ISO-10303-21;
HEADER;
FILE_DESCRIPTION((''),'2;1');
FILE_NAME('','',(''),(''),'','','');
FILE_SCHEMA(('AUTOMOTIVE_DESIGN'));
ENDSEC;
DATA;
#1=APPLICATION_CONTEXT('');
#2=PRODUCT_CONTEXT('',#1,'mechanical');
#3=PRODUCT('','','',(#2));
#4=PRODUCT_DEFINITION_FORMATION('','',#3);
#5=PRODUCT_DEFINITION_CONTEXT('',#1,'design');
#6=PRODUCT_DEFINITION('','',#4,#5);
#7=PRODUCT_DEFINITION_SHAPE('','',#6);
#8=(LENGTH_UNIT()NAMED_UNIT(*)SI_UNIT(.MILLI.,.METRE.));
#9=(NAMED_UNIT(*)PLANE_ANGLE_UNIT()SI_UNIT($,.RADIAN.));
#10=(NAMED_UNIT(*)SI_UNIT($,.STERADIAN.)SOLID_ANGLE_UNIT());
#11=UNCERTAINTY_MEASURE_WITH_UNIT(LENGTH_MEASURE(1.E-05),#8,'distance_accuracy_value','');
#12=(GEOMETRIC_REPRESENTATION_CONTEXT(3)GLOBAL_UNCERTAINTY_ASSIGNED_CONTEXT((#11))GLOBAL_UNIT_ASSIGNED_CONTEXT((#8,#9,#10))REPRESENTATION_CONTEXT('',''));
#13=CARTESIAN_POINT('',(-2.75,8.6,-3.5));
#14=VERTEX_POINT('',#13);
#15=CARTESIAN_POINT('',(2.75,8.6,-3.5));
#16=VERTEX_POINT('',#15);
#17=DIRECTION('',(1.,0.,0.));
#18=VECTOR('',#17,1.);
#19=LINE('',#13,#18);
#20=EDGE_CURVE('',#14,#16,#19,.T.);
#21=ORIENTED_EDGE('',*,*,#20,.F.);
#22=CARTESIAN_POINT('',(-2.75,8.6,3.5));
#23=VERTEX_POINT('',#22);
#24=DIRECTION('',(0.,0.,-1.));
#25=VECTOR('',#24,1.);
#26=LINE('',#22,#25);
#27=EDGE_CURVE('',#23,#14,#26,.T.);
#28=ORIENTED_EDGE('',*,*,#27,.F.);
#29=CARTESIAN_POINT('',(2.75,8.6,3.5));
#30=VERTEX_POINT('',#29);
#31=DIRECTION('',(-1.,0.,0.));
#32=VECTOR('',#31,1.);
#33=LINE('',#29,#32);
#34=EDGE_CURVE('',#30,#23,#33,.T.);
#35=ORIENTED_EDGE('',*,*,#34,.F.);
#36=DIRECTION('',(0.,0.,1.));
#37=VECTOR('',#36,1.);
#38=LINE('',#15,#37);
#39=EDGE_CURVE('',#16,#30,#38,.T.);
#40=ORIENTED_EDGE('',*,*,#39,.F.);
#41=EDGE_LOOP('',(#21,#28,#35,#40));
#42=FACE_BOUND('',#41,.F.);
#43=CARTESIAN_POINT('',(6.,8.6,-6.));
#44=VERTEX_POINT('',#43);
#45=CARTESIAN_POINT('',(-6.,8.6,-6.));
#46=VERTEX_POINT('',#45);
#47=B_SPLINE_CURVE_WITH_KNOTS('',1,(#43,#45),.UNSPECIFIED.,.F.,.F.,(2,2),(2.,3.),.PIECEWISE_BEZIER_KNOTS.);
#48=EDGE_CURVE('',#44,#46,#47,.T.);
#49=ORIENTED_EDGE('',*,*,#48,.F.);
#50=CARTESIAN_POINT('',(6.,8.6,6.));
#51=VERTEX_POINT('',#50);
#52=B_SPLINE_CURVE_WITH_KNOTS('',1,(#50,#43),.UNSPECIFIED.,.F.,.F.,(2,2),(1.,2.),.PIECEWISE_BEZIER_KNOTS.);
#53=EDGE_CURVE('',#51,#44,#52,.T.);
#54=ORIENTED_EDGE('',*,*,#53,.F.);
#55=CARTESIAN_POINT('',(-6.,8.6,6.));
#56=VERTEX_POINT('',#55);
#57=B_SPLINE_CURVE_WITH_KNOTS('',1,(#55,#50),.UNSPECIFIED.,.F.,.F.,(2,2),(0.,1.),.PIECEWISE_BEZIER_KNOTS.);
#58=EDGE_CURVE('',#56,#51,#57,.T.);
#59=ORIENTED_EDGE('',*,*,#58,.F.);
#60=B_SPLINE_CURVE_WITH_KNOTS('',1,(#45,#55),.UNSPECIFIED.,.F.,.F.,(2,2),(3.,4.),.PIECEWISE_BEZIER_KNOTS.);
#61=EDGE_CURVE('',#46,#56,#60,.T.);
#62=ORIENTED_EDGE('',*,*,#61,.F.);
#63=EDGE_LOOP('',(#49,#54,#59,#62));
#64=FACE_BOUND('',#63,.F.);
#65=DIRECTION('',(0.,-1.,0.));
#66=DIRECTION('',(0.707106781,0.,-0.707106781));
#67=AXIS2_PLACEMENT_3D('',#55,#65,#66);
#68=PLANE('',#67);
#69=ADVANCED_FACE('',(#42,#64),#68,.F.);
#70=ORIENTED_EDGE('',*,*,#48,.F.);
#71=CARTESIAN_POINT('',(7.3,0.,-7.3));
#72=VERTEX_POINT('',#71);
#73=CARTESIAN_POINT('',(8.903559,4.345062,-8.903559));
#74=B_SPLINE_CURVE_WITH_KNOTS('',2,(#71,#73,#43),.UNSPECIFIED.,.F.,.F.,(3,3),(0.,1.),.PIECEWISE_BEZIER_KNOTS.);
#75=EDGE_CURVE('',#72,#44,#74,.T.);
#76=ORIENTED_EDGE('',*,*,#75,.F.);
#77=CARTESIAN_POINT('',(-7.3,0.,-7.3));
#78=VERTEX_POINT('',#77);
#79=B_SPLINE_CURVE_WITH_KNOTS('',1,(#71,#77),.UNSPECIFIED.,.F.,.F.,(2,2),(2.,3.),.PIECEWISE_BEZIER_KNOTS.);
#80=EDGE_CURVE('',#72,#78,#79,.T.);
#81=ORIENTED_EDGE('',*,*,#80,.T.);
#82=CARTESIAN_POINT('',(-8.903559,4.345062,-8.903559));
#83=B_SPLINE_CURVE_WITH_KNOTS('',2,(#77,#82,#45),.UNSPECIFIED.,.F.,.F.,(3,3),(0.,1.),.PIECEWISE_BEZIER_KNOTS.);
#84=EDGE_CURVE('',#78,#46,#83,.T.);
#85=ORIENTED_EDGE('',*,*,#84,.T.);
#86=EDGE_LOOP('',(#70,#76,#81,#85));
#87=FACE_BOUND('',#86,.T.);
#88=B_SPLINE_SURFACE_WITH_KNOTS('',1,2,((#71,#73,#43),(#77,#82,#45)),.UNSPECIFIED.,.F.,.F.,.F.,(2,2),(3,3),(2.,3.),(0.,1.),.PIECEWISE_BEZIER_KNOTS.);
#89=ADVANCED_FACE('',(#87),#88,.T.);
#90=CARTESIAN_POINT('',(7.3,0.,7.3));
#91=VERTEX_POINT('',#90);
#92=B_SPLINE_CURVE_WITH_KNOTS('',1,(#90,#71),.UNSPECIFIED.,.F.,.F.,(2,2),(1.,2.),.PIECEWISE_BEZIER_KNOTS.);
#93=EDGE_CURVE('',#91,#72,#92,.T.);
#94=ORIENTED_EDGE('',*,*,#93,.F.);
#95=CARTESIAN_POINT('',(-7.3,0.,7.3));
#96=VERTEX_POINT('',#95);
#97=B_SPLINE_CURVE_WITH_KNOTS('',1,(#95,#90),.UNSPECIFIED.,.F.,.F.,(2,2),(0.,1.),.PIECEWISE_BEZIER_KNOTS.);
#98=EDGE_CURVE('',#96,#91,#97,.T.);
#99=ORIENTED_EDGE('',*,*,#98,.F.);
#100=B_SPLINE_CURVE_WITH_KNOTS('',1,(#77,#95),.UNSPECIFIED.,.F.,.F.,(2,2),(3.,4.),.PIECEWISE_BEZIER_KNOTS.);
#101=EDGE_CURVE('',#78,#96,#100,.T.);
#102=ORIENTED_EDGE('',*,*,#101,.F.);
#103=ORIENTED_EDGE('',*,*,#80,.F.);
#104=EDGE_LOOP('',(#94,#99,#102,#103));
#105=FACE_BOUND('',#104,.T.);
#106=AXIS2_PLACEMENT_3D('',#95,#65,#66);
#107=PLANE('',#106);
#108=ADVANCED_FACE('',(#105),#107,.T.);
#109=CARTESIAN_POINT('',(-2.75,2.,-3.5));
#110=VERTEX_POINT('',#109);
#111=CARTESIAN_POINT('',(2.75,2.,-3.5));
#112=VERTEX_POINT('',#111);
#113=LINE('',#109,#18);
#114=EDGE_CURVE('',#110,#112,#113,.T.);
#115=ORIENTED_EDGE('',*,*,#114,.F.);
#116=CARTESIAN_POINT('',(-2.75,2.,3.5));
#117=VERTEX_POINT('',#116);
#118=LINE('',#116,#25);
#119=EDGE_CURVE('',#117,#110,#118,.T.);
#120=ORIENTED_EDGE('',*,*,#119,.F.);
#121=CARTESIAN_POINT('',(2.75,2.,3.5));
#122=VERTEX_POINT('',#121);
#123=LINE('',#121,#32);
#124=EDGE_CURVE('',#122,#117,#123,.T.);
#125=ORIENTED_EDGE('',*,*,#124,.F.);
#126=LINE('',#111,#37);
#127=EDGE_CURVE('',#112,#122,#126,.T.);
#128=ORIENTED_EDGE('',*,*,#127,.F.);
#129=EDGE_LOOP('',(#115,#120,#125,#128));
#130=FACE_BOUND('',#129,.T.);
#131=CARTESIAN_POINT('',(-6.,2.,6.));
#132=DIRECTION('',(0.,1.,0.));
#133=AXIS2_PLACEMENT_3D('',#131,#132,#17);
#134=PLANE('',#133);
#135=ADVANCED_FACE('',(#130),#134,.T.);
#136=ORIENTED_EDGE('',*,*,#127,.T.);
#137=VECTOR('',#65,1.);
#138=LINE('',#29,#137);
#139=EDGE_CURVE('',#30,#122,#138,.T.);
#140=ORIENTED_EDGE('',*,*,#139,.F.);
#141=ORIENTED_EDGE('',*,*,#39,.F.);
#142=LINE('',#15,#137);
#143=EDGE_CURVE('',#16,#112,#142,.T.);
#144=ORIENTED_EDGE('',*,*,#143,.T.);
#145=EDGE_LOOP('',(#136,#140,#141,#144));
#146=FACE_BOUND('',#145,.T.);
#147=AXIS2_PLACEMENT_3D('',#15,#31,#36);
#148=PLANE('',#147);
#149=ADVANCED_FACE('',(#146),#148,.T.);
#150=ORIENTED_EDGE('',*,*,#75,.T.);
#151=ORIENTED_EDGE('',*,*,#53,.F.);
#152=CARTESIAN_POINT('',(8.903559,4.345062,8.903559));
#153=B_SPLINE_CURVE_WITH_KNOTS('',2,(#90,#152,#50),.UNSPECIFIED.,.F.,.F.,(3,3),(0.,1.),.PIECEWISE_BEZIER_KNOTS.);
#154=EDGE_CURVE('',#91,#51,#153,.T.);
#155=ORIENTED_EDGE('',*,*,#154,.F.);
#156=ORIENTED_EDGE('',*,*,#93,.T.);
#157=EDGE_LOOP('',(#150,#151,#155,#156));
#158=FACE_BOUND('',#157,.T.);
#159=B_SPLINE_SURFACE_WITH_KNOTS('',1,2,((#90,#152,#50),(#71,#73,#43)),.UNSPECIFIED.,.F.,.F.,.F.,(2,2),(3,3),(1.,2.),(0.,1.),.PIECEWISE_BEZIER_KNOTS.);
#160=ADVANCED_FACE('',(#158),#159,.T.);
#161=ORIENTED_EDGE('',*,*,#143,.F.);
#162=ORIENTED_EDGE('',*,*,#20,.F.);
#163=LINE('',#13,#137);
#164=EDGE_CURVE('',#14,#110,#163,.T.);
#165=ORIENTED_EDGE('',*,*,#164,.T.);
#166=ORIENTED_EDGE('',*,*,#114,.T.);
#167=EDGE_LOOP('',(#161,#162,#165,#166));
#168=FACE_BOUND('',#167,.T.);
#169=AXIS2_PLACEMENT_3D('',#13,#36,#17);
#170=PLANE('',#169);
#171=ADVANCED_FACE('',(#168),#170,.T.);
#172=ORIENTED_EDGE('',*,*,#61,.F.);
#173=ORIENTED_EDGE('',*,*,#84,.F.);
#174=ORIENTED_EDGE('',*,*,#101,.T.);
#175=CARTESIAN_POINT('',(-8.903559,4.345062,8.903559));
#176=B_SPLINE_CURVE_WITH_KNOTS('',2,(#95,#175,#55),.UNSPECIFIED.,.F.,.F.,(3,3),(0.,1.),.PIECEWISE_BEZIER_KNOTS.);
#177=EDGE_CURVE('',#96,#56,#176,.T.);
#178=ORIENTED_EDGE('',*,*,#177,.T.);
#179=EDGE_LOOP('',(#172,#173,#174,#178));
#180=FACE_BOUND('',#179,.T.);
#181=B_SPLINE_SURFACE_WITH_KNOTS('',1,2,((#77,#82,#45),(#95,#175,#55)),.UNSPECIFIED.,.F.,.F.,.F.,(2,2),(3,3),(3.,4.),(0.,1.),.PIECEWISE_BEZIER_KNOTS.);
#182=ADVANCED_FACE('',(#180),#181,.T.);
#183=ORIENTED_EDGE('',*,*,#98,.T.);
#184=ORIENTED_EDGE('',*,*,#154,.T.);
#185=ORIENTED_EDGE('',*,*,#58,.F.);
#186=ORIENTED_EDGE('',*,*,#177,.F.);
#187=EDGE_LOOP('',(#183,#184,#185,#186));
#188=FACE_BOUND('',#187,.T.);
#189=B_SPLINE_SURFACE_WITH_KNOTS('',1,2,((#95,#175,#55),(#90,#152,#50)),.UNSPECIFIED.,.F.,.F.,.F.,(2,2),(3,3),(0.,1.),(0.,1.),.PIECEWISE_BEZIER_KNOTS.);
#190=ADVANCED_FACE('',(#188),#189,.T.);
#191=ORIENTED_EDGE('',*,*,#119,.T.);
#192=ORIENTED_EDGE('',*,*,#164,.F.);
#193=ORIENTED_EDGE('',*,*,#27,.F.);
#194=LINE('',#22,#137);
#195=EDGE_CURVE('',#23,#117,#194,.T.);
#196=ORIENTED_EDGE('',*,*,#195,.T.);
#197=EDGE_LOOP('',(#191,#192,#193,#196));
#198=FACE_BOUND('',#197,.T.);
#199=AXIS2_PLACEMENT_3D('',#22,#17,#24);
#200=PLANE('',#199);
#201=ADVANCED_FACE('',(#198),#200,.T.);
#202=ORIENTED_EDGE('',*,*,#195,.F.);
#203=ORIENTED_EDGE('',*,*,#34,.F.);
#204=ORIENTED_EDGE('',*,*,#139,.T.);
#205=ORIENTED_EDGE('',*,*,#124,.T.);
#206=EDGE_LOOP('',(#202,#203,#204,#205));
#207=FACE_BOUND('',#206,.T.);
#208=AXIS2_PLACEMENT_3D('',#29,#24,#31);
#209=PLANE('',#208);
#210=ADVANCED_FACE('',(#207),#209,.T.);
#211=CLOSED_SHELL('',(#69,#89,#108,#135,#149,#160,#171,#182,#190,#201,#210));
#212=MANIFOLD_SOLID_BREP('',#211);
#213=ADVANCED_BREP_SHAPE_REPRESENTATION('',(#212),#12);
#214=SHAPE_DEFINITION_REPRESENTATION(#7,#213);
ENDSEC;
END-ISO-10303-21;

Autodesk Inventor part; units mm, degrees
ref_plane "YZ Plane" through (0, 0, 0) normal (1, 0, 0) x (0, 1, 0)
ref_plane "XZ Plane" through (0, 0, 0) normal (0, 1, 0) x (-1, 0, 0)
sketch "Base Loop" plane through (0, 0, 0) normal (0, 1, 0) x (-1, 0, 0)
  line L0 (-7.3, 7.3) -> (7.3, 7.3)
  line L1 (7.3, 7.3) -> (7.3, -7.3)
  line L2 (7.3, -7.3) -> (-7.3, -7.3)
  line L3 (-7.3, -7.3) -> (-7.3, 7.3)
  line L4 (-7.3, 7.3) -> (7.3, -7.3) construction
  line L5 (7.3, 7.3) -> (-7.3, -7.3) construction
  point P0 (0, 0)
  point P1 (0, 0)
  point P2 (0, 0)
  dimension "d0" = 14.6
  dimension "d1" = 14.6
ref_plane "Mid Plane" through (-7.3, 2, -7.3) normal (0, 1, 0) x (1, 0, 0)
ref_plane "Base Plane" through (-7.3, 0, -7.3) normal (0, 1, 0) x (1, 0, 0)
sketch "Mid Loop" plane through (-7.3, 2, -7.3) normal (0, 1, 0) x (1, 0, 0)
  line L0 (15.1, -15.1) -> (-0.5, -15.1)
  line L1 (-0.5, -15.1) -> (-0.5, 0.5)
  line L2 (-0.5, 0.5) -> (15.1, 0.5)
  line L3 (15.1, 0.5) -> (15.1, -15.1)
  line L4 (15.1, -15.1) -> (-0.5, 0.5) construction
  line L5 (-0.5, -15.1) -> (15.1, 0.5) construction
  point P0 (7.3, -7.3)
  dimension "d3" = 15.6
  dimension "d4" = 15.6
ref_plane "Top Plane" through (-7.3, 8.6, -7.3) normal (0, 1, 0) x (1, 0, 0)
sketch "Top Loop" plane through (-7.3, 8.6, -7.3) normal (0, 1, 0) x (1, 0, 0)
  line L0 (13.3, -13.3) -> (1.3, -13.3)
  line L1 (1.3, -13.3) -> (1.3, -1.3)
  line L2 (1.3, -1.3) -> (13.3, -1.3)
  line L3 (13.3, -1.3) -> (13.3, -13.3)
  line L4 (13.3, -13.3) -> (1.3, -1.3) construction
  line L5 (1.3, -13.3) -> (13.3, -1.3) construction
  point P0 (7.3, -7.3)
  dimension "d6" = 12
  dimension "d7" = 12
loft "Keyswitch Body" add profiles "Base Loop", "Mid Loop", "Top Loop"
sketch "Cut in profile" plane through (-6, 8.6, 6) normal (0, 1, 0) x (1, 0, 0)
  line L0 (8.75, 2.5) -> (3.25, 2.5)
  line L1 (3.25, 2.5) -> (3.25, 9.5)
  line L2 (3.25, 9.5) -> (8.75, 9.5)
  line L3 (8.75, 9.5) -> (8.75, 2.5)
  line L4 (8.75, 2.5) -> (3.25, 9.5) construction
  line L5 (3.25, 2.5) -> (8.75, 9.5) construction
  point P0 (6, 6)
  dimension "d17" = 7
  dimension "d18" = 5.5
extrude "Pole Cut in" cut sketch "Cut in profile" against normal blind 6.6
equation "\"d1\" = d0"
equation "\"d3\" = s_bwidth"
equation "\"d4\" = d3"
equation "\"d17\" = s_polebl"
equation "\"d18\" = s_polebw"
equation "\"k_width\" = 18.1"
equation "\"k_height\" = 18"
equation "\"k_taper1\" = 1.5"
equation "\"k_taper2\" = 0.5"
equation "\"k_radius\" = 6"
equation "\"k_wthick\" = 1.5"
equation "\"k_ribthick\" = 1.5"
equation "\"k_ribheight\" = 5"
equation "\"k_poleoff\" = 2.2625"
equation "\"k_poledia\" = 5.54"
equation "\"k_cmxw\" = 1.6"
equation "\"k_cmxl\" = 4.35"
equation "\"s_bwidth\" = 15.6"
equation "\"s_poleh\" = 3.6"
equation "\"s_polebw\" = 5.5"
equation "\"s_polebl\" = 7"
equation "\"b_rshift\" = 49.775"
equation "\"b_ctrl\" = 22.625"
equation "\"b_space\" = 117.65"
equation "\"b_height\" = 77.4"
equation "\"b_width\" = 286.5"
equation "\"b_lshift\" = 40.725"
equation "\"b_tab\" = 27.15"
equation "\"b_pad\" = 1"
equation "\"b_caps\" = 31.675"
equation "\"k_staper\" = 1"
equation "\"k_ltaper\" = 1.5"
equation "\"k_lradius\" = 6"
equation "\"k_sradius\" = 4"
equation "\"k_height_t\" = 16"
equation "\"k_taper_wide\" = 1.5"
equation "\"k_taper_thin\" = 0.5"
equation "\"k_height_low\" = 16"
properties part number "keyswitch-base_cherrymx"
